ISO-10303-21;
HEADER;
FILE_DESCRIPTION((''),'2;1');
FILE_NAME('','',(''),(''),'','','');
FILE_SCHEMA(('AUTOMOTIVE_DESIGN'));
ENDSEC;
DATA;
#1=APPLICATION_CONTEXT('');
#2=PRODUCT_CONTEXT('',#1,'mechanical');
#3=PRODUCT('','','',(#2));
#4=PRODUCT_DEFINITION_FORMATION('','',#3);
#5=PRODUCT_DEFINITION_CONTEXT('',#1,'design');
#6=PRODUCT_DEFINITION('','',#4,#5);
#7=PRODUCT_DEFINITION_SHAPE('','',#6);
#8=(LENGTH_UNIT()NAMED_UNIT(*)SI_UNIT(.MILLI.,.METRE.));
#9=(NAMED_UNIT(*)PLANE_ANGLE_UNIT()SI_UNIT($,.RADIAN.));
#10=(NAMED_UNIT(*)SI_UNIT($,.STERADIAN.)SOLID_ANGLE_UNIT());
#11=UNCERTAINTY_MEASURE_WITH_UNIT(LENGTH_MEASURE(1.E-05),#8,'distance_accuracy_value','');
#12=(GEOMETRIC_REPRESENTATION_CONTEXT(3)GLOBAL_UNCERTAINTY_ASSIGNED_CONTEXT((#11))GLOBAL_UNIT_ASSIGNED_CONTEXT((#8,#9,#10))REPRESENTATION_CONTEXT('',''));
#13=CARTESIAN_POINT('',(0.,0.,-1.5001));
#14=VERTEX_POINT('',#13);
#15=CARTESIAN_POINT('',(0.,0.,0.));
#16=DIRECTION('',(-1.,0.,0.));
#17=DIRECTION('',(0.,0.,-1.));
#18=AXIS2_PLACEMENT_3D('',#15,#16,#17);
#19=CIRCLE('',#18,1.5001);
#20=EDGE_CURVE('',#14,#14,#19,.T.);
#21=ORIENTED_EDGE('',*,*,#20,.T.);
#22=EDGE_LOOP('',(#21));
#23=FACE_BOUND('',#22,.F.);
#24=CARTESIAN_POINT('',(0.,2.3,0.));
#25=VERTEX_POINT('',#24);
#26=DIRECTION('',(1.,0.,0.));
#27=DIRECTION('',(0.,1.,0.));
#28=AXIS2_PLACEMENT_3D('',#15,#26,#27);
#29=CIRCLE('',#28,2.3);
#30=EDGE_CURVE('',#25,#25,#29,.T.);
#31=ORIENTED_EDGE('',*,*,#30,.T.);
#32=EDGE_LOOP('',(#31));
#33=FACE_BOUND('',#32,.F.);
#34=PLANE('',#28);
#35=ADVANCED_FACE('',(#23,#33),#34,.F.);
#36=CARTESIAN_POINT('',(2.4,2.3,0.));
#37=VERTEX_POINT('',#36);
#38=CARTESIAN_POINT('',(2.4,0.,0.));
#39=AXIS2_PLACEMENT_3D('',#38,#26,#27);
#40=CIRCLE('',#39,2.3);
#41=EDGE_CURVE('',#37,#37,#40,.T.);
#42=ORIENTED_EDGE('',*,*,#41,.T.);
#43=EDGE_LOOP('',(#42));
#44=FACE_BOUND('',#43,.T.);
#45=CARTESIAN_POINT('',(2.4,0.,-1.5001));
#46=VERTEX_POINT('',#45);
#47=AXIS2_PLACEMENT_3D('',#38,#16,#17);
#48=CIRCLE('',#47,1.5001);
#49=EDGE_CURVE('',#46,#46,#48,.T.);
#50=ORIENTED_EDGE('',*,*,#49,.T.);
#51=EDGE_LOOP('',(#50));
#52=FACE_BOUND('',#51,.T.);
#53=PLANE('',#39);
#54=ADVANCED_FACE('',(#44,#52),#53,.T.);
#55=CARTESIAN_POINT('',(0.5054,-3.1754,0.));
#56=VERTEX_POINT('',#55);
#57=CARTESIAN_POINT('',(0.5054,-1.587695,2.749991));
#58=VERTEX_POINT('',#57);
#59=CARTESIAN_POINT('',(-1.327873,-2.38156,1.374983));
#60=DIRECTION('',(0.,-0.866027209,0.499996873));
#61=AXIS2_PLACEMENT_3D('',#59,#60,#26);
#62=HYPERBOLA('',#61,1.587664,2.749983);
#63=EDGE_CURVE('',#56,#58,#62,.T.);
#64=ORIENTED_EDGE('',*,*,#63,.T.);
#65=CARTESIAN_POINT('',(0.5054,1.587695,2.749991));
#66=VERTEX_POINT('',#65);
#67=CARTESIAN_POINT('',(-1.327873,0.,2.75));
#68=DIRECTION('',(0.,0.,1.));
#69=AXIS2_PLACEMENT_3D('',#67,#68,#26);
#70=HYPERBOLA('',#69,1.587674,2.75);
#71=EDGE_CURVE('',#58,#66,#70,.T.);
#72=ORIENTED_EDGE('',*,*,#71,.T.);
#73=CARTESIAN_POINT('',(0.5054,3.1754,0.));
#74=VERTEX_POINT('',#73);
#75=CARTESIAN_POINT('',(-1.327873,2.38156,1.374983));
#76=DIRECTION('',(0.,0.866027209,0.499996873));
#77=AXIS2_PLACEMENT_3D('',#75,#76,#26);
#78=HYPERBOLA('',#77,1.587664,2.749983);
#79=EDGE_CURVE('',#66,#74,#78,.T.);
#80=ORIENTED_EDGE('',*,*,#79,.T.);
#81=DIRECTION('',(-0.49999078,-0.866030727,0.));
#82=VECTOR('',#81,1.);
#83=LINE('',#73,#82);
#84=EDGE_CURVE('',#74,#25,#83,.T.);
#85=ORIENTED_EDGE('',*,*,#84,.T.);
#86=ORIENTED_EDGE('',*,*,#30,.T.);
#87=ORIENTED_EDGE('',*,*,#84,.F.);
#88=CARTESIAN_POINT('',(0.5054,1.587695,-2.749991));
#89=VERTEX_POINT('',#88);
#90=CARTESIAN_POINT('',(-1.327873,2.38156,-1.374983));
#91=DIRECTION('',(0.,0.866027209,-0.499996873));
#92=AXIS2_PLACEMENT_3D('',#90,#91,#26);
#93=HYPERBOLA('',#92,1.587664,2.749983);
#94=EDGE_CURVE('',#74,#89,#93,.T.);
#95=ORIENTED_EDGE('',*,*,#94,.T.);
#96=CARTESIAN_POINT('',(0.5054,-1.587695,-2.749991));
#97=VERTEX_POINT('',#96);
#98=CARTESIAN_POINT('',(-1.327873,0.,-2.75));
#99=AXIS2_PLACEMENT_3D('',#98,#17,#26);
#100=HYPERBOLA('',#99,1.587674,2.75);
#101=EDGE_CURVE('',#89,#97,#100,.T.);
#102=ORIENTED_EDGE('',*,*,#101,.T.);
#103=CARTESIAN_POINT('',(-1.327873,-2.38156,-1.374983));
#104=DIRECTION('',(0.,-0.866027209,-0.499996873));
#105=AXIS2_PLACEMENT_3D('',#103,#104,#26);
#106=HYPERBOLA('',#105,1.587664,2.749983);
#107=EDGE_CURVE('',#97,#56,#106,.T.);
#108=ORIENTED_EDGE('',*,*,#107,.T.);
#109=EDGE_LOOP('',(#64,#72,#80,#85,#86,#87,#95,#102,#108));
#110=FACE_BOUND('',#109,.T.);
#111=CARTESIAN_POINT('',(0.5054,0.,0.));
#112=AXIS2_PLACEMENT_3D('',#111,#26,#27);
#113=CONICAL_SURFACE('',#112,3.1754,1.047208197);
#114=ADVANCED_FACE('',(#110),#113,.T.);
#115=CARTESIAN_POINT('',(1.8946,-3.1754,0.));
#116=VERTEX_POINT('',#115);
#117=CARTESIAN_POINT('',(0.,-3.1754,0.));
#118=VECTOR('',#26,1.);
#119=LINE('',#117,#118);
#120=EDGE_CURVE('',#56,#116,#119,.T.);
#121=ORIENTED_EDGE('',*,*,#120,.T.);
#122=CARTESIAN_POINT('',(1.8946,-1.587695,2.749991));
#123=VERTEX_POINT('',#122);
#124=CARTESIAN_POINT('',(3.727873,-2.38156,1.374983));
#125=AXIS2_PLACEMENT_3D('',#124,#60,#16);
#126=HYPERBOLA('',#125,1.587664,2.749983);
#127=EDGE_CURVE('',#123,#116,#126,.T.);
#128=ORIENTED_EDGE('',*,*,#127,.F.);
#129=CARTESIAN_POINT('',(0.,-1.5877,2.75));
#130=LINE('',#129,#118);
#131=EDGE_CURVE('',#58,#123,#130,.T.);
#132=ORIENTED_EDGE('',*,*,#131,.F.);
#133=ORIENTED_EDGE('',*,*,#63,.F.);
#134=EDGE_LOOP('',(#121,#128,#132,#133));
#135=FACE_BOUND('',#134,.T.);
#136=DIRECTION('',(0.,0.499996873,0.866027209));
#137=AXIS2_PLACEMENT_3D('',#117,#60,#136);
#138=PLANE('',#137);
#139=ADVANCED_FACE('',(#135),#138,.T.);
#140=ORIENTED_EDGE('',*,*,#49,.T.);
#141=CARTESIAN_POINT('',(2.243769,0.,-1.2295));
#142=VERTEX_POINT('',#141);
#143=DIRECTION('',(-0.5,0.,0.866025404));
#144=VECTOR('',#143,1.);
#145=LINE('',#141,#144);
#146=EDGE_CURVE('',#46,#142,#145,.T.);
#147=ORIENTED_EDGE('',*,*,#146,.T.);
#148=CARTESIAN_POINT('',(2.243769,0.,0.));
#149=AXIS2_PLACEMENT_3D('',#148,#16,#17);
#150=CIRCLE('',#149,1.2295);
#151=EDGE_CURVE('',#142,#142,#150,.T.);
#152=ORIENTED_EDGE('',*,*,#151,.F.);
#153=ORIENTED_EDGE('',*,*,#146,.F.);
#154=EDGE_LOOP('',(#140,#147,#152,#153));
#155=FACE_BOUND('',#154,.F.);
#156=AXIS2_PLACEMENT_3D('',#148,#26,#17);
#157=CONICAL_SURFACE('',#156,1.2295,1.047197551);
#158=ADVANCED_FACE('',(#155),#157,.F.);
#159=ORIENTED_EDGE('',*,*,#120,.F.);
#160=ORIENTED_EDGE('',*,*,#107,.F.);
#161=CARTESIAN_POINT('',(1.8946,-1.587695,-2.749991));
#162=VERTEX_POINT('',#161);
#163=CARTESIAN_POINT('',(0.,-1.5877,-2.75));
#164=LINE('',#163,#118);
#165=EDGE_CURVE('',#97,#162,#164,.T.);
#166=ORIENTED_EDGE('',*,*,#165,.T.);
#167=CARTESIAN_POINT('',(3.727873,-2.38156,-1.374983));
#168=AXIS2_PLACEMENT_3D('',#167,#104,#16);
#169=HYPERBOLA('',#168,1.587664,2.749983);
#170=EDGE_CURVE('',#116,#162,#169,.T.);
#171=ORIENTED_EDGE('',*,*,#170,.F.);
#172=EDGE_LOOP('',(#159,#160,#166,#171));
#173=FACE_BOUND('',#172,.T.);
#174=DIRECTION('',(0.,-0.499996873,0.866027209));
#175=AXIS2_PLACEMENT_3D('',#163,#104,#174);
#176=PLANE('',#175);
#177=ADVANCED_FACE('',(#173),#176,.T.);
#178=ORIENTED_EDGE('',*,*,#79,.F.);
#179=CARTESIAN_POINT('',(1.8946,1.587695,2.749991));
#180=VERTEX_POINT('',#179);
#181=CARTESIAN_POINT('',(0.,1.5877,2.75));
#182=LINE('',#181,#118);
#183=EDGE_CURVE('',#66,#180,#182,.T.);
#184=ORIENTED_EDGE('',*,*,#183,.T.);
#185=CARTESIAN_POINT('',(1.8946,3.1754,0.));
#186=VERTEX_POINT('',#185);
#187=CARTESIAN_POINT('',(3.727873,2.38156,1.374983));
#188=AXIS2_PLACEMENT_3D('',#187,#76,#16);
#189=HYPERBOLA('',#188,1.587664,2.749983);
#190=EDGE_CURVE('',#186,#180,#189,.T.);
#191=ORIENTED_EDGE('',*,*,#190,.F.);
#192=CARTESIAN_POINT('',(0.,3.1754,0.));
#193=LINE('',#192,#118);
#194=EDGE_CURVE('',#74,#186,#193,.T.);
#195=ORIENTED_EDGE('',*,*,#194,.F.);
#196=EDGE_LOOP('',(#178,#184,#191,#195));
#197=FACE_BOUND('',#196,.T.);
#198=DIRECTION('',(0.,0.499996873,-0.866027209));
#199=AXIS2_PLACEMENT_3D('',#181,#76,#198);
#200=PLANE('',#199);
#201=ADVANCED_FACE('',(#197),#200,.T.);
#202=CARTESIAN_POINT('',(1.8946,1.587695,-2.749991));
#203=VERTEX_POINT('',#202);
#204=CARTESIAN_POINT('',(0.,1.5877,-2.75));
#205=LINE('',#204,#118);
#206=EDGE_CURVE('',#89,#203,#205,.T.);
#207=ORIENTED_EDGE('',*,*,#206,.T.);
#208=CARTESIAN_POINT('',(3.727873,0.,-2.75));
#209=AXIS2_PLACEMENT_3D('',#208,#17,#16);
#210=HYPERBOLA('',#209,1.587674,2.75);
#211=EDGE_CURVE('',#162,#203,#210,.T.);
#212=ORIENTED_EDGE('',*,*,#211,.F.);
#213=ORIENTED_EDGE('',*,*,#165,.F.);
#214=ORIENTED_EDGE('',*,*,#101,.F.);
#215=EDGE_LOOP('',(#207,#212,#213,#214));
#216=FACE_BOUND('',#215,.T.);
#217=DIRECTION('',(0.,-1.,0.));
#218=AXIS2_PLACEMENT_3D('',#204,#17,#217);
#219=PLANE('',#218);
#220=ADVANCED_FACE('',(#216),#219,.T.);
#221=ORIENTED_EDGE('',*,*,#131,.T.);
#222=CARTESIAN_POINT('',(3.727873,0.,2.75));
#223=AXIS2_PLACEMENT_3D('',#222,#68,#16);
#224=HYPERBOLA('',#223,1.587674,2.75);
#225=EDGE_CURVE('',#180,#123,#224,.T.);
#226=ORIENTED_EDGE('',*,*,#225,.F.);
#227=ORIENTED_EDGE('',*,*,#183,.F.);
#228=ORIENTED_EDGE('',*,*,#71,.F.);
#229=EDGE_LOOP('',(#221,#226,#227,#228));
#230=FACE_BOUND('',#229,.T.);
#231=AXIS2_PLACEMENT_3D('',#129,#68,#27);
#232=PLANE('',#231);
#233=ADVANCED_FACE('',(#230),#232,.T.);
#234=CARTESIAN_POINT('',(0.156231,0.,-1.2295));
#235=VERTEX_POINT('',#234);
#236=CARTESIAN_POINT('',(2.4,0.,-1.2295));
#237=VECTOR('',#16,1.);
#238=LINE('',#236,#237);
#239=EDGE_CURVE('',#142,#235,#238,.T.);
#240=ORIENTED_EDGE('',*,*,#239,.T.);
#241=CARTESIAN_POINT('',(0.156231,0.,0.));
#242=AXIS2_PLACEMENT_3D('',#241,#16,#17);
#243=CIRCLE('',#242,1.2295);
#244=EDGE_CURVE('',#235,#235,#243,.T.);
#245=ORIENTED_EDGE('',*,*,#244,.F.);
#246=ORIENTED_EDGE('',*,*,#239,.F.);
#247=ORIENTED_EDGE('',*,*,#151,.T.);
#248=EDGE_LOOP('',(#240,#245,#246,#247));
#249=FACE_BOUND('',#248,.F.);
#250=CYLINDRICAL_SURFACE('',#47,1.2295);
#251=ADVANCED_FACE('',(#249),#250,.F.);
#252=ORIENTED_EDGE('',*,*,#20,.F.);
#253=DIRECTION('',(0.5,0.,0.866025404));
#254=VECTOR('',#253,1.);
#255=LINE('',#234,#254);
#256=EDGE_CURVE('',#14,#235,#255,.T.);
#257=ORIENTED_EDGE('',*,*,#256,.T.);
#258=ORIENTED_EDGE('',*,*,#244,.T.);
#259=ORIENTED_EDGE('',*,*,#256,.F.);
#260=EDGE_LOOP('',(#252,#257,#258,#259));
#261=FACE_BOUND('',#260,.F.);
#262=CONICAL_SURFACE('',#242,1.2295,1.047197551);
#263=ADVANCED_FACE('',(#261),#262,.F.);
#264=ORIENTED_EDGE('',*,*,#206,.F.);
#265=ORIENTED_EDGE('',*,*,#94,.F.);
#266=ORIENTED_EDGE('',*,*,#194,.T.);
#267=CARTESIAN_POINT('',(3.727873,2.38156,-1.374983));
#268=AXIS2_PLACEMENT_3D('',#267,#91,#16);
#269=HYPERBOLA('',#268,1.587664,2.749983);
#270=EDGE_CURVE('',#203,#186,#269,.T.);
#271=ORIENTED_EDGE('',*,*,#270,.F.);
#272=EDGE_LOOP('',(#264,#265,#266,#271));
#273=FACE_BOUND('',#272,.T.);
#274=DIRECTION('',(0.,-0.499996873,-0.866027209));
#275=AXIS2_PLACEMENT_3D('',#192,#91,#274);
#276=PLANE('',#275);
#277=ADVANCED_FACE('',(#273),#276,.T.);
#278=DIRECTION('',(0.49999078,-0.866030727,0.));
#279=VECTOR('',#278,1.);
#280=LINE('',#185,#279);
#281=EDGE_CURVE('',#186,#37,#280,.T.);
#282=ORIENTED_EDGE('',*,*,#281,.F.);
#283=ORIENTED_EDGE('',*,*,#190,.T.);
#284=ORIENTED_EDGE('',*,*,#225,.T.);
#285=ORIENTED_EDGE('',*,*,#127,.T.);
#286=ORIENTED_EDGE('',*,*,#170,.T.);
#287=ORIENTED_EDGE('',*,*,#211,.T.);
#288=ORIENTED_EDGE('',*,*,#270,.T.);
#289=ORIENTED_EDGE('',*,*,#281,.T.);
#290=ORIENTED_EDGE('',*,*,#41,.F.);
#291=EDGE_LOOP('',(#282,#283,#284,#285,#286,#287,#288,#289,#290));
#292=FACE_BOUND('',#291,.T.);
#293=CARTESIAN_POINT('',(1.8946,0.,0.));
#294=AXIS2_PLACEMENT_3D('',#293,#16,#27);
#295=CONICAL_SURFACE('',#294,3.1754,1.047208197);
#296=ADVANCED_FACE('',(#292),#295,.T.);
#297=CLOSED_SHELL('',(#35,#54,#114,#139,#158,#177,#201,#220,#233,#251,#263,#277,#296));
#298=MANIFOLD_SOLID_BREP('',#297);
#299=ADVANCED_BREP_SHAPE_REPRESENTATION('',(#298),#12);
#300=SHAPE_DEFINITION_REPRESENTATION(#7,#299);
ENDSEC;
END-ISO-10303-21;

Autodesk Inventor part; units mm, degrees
ref_plane "YZ Plane" through (0, 0, 0) normal (1, 0, 0) x (0, 1, 0)
ref_plane "XZ Plane" through (0, 0, 0) normal (0, 1, 0) x (-1, 0, 0)
sketch "Skizze1" plane through (0, 0, 0) normal (1, 0, 0) x (0, 1, 0)
  line L0 (-3.1754, 0) -> (-1.5877, 2.75)
  line L1 (-1.5877, 2.75) -> (1.5877, 2.75)
  line L2 (1.5877, 2.75) -> (3.1754, 0)
  line L3 (3.1754, 0) -> (1.5877, -2.75)
  line L4 (1.5877, -2.75) -> (-1.5877, -2.75)
  line L5 (-1.5877, -2.75) -> (-3.1754, 0)
  point P0 (0, 0)
  point P1 (0, 0)
  dimension "d0" = 6.3509
extrude "Körper" add sketch "Skizze1" along normal blind 2.4
sketch "Skizze2" plane through (0, 0, 0) normal (0, 0, 1) x (1, 0, 0)
  line L0 (0, 1.5877) -> (0, 3.1754) projected
  line L1 (0, 3.1754) -> (2.4, 3.1754) projected
  line L2 (2.4, 1.5877) -> (2.4, 3.1754) projected
  line L3 (-0.48, 0) -> (2.88, 0) projected
  line L4 (0.5054, 3.1754) -> (0, 2.3)
  line L5 (1.8946, 3.1754) -> (2.4, 2.3)
  dimension "d3" = 30
  dimension "d4" = 30
  dimension "d5" = 4.6
  dimension "d6" = 4.6
revolve "Fase1" cut sketch "Skizze2" angle 360 about axis through (-10, 0, 0) along (1, 0, 0)
sketch "Skizze3" plane through (2.4, 0, 0) normal (1, 0, 0) x (0, 0, -1)
  arc A0 (-0.625, -1.0825) -> (0.625, -1.0825) centre (0, 0) ccw projected
hole "Gewinde" at (2.4, 0, 0) direction (-1, 0, 0) diameter 2.459 end through all thread size "M3x0.5" class "6H" standard "ISO Metric profile"
chamfer "Fase2" distance 0.2706 angle 30 1 edges at (2.4, 0, 1.2295) measured on face at (2.4, 1.9179, -0.2329)
chamfer "Fase3" distance 0.2706 angle 30 1 edges at (0, 0, 1.2295) measured on face at (0, 1.9179, -0.2329)
ref_plane "Work Plane1" through (-6.3375, 0, 0) normal (0, -0.8660254, -0.5) x (1, 0, 0)
equation "\"d0\" = 1.1547 * SW"
equation "\"d1\" = KOH"
equation "\"d3\" = ANG1"
equation "\"d4\" = ANG2"
equation "\"d5\" = SW0"
equation "\"d6\" = SW01"
equation "\"d8\" = -0.5 * GD1 + 0.5 * NND"
equation "\"d40\" = -0.5 * GD1 + 0.5 * NND"
equation "\"d10\" = -0.5 * GD1 + 0.5 * NND"
equation "\"d41\" = -0.5 * GD1 + 0.5 * NND"
equation "\"ANG1\" = 30deg"
equation "\"ANG2\" = 30deg"
equation "\"NND\" = 3"
equation "\"KOH\" = 2.4"
equation "\"SW\" = 5.5"
equation "\"SW0\" = 4.6"
equation "\"SW01\" = SW0"
equation "\"GUL\" = 0.541266 * PTC"
equation "\"THREADDIA\" = 3"
equation "\"TOA\" = 30deg"
equation "\"PTC\" = 0.5"
equation "\"E0\" = 1.155 * SW"
equation "\"GAL\" = 0.541266 * PTC"
equation "\"GD1\" = 2.458734"
properties part number "ISO 4032 - M3" material "Edelstahl, 440C"
